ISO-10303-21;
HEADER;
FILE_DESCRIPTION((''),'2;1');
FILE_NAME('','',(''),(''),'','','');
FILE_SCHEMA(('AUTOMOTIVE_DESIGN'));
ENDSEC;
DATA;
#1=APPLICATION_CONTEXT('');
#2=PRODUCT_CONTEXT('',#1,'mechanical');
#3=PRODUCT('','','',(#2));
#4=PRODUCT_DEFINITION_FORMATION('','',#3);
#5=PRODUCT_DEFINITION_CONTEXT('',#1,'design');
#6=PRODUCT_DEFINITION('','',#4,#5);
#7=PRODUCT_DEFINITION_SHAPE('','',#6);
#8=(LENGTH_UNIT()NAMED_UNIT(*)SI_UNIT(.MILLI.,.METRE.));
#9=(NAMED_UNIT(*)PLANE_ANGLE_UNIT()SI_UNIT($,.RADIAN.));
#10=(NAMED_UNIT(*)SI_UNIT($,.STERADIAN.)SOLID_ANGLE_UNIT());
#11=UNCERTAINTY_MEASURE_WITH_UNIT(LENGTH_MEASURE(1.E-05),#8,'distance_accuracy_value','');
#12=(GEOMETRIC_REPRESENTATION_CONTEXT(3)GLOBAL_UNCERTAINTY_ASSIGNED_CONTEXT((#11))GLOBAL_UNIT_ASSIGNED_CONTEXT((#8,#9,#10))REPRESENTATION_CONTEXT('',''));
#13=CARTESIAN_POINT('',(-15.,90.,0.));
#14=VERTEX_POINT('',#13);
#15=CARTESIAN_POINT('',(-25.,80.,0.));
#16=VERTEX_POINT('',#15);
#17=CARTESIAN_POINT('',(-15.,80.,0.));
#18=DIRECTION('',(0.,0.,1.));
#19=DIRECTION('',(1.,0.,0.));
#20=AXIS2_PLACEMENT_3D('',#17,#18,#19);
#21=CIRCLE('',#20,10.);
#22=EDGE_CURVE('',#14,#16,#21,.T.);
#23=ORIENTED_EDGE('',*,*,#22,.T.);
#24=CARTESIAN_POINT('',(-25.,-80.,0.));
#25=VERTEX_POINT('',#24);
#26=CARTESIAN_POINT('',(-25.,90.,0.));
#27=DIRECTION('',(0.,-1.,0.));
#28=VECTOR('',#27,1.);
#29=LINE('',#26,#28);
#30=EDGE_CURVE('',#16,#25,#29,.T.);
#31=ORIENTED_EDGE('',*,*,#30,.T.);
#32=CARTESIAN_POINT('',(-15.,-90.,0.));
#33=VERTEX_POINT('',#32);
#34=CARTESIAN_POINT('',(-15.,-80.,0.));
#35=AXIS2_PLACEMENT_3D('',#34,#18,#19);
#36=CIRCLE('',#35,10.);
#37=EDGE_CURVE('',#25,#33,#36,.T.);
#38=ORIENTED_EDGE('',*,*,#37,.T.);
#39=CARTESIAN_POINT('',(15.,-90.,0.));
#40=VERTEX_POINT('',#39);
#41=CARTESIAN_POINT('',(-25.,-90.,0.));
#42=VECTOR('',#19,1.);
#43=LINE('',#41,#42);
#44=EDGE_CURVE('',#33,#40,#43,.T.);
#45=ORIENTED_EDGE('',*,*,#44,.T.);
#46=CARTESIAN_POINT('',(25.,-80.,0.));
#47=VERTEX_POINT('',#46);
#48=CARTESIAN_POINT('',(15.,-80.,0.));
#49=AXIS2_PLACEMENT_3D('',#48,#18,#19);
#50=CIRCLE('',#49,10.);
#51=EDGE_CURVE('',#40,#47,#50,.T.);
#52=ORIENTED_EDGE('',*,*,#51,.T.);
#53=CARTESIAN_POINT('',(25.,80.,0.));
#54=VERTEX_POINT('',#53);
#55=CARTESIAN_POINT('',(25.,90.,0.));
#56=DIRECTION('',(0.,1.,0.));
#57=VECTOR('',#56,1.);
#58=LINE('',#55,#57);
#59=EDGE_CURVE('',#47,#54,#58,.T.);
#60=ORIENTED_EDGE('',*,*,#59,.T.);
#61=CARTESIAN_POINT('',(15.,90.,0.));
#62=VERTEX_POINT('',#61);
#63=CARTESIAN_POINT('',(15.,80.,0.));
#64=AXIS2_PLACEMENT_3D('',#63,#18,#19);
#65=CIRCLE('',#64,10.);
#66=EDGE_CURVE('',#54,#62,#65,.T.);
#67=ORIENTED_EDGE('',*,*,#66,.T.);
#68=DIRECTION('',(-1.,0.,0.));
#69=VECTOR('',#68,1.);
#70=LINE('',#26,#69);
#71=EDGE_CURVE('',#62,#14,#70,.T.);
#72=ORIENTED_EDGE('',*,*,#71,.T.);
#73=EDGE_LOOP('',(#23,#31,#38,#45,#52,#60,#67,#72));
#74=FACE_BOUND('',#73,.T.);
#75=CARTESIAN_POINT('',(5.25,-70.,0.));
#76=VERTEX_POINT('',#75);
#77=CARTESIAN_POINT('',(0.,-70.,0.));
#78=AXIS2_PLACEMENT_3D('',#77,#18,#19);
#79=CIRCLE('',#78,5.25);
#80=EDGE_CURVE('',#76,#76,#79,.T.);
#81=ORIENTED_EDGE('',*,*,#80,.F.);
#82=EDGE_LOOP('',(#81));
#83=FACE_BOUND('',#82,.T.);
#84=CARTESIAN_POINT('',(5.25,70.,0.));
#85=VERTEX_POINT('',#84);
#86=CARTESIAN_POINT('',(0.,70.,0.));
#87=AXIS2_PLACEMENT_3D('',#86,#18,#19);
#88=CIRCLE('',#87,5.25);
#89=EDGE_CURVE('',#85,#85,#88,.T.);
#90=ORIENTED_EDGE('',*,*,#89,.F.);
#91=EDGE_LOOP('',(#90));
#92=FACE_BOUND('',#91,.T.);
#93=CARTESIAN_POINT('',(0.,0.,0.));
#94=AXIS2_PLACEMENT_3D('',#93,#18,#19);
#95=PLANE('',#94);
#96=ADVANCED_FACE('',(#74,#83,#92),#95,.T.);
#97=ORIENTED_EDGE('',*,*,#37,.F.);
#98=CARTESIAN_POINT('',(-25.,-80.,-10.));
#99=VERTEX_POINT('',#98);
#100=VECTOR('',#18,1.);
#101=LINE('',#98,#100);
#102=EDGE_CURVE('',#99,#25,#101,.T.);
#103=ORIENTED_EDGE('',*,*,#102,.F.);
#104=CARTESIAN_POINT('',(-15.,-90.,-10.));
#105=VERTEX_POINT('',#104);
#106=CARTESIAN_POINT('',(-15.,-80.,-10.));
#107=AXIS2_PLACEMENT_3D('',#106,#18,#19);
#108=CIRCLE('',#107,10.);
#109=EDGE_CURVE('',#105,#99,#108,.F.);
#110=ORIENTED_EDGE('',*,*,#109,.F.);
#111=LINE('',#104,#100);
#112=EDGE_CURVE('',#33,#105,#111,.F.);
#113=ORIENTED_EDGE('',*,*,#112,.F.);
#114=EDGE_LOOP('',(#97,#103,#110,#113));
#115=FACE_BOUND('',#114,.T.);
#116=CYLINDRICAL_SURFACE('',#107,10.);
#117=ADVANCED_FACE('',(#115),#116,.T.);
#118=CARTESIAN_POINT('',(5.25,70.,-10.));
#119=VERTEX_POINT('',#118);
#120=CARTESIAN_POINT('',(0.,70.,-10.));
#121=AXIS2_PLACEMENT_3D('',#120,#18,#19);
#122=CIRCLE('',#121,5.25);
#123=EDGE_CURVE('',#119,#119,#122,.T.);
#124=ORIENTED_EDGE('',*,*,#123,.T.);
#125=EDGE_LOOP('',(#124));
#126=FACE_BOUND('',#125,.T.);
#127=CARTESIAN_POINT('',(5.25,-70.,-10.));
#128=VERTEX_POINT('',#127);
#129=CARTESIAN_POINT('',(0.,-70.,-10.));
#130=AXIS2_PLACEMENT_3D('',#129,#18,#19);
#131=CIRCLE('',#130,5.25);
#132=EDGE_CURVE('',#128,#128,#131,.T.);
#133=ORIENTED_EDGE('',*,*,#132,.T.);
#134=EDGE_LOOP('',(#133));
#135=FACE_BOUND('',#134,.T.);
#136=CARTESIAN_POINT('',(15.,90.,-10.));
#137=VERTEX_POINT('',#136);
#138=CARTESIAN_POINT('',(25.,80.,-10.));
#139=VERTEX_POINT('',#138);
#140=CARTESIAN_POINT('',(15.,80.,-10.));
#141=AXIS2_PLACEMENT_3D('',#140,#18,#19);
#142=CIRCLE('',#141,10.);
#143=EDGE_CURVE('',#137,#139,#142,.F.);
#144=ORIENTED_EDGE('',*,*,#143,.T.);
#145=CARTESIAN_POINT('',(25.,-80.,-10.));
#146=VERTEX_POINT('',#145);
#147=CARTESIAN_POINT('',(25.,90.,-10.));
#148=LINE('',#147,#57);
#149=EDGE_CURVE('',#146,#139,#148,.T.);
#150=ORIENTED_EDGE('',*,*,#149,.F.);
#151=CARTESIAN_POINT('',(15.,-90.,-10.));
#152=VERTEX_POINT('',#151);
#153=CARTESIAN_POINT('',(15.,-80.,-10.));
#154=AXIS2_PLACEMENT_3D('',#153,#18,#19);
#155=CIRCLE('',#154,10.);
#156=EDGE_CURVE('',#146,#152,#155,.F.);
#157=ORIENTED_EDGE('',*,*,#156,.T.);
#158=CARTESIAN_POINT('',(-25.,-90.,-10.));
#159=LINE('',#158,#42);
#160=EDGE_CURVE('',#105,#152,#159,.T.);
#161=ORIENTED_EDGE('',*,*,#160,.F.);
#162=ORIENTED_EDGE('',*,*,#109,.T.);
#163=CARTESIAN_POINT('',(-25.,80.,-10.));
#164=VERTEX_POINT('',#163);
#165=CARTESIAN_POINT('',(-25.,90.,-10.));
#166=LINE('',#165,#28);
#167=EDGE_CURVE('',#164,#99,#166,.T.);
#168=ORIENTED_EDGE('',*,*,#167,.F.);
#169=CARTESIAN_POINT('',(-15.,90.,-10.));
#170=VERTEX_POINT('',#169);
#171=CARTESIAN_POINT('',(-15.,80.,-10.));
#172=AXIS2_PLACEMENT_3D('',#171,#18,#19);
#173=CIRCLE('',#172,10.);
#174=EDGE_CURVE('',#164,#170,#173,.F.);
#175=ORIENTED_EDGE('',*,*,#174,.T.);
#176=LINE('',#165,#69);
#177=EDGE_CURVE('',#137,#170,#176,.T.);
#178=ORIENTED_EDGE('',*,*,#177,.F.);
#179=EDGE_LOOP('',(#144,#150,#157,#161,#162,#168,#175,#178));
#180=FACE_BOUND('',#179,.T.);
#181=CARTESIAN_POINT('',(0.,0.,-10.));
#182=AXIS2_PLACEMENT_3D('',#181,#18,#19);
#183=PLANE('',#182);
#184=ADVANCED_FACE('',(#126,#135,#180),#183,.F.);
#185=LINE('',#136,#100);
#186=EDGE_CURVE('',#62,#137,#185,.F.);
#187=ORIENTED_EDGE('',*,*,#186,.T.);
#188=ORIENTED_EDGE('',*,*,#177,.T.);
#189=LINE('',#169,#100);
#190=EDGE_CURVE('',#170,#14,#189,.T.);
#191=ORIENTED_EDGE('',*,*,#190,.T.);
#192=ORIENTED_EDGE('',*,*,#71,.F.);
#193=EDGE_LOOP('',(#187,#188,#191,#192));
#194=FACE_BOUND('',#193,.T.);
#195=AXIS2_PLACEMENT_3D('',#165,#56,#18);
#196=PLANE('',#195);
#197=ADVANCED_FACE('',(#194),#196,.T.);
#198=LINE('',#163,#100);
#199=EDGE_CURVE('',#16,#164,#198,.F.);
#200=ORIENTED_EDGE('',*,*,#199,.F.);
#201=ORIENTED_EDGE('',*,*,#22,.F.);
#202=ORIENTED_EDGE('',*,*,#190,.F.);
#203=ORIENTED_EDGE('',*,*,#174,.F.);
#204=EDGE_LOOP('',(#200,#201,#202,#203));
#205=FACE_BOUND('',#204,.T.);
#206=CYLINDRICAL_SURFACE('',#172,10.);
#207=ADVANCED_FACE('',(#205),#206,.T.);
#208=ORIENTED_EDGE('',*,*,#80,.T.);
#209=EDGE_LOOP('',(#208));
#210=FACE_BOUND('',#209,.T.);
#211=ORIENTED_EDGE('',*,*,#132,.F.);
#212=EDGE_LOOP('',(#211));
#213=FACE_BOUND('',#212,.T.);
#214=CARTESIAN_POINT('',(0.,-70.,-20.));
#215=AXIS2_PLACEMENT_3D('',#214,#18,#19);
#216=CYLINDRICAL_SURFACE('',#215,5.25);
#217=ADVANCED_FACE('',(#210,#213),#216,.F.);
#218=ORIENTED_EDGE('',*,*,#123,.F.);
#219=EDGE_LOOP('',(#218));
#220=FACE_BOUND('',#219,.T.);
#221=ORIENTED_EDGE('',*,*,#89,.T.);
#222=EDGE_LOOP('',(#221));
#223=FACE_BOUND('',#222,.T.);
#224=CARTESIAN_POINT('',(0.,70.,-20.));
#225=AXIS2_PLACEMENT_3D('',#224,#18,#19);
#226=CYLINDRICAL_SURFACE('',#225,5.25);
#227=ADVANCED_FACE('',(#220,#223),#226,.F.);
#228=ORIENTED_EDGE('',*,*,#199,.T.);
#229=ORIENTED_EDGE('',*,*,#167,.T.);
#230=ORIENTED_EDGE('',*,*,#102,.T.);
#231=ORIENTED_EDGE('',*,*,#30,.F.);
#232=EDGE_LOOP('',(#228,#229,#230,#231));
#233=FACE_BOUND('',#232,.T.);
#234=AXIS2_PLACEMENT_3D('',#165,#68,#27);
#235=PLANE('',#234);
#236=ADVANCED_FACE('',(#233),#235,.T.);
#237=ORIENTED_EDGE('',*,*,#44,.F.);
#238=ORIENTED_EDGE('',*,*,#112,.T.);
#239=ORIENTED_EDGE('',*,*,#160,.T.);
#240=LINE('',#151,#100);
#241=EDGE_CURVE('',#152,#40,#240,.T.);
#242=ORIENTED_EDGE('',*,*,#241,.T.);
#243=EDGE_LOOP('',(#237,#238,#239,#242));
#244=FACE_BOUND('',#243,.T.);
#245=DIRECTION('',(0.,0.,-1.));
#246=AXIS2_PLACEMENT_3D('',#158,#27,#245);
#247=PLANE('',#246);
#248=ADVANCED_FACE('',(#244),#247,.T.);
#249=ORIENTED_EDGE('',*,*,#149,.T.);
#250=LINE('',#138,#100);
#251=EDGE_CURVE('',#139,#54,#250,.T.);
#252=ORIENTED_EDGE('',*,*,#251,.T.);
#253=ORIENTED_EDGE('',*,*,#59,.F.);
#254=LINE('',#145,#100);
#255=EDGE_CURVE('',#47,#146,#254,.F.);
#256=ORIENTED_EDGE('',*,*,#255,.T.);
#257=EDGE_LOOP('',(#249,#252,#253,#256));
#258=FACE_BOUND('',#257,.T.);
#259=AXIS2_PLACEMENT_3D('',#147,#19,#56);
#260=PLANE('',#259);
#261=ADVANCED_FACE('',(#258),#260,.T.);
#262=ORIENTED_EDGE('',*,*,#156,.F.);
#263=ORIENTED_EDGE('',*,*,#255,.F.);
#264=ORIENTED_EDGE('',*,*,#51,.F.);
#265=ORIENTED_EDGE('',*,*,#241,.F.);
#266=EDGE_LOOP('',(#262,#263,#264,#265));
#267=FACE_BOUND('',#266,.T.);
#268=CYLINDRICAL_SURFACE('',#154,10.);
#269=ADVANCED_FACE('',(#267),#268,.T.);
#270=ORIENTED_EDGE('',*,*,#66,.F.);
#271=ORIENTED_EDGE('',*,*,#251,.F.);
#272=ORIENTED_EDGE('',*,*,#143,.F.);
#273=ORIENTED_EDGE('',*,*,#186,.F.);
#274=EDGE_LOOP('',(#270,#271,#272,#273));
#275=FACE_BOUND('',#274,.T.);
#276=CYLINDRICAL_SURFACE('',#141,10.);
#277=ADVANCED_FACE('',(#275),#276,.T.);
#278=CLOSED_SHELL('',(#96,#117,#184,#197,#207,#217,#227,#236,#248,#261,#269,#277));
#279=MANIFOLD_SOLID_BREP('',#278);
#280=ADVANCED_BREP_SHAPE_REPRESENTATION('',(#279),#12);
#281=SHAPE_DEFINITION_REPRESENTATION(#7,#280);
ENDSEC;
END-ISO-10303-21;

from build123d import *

# Parameters (mm, degrees)
IZIM1_W               = 50
IZIM1_H               = 180
TABAN_FLAN_1_DEPTH    = 10
RADYUS1_R             = 10
IZIM2_R               = 5.25
KES_EKSTR_ZYON1_DEPTH = 20


# Sheet-metal steps are written as plain solids
with BuildPart() as part:
    # Çizim1 → Taban-Flanş1 (new body)
    with BuildSketch(Plane.XY):
        Rectangle(IZIM1_W, IZIM1_H)
    extrude(amount=-TABAN_FLAN_1_DEPTH)

    # Radyus1
    radyus1_edges = [part.edges().sort_by_distance(p)[0] for p in [
        (25, -90, -5),
        (-25, -90, -5),
        (-25, 90, -5),
        (25, 90, -5),
    ]]
    fillet(radyus1_edges, radius=RADYUS1_R)

    # Çizim2 → Kes-Ekstrüzyon1 (cut)
    with BuildSketch(Plane.XY):
        with Locations((0, 70)):
            Circle(IZIM2_R)
        with Locations((0, -70)):
            Circle(IZIM2_R)
    extrude(amount=-KES_EKSTR_ZYON1_DEPTH, mode=Mode.SUBTRACT)


solid = part.part
